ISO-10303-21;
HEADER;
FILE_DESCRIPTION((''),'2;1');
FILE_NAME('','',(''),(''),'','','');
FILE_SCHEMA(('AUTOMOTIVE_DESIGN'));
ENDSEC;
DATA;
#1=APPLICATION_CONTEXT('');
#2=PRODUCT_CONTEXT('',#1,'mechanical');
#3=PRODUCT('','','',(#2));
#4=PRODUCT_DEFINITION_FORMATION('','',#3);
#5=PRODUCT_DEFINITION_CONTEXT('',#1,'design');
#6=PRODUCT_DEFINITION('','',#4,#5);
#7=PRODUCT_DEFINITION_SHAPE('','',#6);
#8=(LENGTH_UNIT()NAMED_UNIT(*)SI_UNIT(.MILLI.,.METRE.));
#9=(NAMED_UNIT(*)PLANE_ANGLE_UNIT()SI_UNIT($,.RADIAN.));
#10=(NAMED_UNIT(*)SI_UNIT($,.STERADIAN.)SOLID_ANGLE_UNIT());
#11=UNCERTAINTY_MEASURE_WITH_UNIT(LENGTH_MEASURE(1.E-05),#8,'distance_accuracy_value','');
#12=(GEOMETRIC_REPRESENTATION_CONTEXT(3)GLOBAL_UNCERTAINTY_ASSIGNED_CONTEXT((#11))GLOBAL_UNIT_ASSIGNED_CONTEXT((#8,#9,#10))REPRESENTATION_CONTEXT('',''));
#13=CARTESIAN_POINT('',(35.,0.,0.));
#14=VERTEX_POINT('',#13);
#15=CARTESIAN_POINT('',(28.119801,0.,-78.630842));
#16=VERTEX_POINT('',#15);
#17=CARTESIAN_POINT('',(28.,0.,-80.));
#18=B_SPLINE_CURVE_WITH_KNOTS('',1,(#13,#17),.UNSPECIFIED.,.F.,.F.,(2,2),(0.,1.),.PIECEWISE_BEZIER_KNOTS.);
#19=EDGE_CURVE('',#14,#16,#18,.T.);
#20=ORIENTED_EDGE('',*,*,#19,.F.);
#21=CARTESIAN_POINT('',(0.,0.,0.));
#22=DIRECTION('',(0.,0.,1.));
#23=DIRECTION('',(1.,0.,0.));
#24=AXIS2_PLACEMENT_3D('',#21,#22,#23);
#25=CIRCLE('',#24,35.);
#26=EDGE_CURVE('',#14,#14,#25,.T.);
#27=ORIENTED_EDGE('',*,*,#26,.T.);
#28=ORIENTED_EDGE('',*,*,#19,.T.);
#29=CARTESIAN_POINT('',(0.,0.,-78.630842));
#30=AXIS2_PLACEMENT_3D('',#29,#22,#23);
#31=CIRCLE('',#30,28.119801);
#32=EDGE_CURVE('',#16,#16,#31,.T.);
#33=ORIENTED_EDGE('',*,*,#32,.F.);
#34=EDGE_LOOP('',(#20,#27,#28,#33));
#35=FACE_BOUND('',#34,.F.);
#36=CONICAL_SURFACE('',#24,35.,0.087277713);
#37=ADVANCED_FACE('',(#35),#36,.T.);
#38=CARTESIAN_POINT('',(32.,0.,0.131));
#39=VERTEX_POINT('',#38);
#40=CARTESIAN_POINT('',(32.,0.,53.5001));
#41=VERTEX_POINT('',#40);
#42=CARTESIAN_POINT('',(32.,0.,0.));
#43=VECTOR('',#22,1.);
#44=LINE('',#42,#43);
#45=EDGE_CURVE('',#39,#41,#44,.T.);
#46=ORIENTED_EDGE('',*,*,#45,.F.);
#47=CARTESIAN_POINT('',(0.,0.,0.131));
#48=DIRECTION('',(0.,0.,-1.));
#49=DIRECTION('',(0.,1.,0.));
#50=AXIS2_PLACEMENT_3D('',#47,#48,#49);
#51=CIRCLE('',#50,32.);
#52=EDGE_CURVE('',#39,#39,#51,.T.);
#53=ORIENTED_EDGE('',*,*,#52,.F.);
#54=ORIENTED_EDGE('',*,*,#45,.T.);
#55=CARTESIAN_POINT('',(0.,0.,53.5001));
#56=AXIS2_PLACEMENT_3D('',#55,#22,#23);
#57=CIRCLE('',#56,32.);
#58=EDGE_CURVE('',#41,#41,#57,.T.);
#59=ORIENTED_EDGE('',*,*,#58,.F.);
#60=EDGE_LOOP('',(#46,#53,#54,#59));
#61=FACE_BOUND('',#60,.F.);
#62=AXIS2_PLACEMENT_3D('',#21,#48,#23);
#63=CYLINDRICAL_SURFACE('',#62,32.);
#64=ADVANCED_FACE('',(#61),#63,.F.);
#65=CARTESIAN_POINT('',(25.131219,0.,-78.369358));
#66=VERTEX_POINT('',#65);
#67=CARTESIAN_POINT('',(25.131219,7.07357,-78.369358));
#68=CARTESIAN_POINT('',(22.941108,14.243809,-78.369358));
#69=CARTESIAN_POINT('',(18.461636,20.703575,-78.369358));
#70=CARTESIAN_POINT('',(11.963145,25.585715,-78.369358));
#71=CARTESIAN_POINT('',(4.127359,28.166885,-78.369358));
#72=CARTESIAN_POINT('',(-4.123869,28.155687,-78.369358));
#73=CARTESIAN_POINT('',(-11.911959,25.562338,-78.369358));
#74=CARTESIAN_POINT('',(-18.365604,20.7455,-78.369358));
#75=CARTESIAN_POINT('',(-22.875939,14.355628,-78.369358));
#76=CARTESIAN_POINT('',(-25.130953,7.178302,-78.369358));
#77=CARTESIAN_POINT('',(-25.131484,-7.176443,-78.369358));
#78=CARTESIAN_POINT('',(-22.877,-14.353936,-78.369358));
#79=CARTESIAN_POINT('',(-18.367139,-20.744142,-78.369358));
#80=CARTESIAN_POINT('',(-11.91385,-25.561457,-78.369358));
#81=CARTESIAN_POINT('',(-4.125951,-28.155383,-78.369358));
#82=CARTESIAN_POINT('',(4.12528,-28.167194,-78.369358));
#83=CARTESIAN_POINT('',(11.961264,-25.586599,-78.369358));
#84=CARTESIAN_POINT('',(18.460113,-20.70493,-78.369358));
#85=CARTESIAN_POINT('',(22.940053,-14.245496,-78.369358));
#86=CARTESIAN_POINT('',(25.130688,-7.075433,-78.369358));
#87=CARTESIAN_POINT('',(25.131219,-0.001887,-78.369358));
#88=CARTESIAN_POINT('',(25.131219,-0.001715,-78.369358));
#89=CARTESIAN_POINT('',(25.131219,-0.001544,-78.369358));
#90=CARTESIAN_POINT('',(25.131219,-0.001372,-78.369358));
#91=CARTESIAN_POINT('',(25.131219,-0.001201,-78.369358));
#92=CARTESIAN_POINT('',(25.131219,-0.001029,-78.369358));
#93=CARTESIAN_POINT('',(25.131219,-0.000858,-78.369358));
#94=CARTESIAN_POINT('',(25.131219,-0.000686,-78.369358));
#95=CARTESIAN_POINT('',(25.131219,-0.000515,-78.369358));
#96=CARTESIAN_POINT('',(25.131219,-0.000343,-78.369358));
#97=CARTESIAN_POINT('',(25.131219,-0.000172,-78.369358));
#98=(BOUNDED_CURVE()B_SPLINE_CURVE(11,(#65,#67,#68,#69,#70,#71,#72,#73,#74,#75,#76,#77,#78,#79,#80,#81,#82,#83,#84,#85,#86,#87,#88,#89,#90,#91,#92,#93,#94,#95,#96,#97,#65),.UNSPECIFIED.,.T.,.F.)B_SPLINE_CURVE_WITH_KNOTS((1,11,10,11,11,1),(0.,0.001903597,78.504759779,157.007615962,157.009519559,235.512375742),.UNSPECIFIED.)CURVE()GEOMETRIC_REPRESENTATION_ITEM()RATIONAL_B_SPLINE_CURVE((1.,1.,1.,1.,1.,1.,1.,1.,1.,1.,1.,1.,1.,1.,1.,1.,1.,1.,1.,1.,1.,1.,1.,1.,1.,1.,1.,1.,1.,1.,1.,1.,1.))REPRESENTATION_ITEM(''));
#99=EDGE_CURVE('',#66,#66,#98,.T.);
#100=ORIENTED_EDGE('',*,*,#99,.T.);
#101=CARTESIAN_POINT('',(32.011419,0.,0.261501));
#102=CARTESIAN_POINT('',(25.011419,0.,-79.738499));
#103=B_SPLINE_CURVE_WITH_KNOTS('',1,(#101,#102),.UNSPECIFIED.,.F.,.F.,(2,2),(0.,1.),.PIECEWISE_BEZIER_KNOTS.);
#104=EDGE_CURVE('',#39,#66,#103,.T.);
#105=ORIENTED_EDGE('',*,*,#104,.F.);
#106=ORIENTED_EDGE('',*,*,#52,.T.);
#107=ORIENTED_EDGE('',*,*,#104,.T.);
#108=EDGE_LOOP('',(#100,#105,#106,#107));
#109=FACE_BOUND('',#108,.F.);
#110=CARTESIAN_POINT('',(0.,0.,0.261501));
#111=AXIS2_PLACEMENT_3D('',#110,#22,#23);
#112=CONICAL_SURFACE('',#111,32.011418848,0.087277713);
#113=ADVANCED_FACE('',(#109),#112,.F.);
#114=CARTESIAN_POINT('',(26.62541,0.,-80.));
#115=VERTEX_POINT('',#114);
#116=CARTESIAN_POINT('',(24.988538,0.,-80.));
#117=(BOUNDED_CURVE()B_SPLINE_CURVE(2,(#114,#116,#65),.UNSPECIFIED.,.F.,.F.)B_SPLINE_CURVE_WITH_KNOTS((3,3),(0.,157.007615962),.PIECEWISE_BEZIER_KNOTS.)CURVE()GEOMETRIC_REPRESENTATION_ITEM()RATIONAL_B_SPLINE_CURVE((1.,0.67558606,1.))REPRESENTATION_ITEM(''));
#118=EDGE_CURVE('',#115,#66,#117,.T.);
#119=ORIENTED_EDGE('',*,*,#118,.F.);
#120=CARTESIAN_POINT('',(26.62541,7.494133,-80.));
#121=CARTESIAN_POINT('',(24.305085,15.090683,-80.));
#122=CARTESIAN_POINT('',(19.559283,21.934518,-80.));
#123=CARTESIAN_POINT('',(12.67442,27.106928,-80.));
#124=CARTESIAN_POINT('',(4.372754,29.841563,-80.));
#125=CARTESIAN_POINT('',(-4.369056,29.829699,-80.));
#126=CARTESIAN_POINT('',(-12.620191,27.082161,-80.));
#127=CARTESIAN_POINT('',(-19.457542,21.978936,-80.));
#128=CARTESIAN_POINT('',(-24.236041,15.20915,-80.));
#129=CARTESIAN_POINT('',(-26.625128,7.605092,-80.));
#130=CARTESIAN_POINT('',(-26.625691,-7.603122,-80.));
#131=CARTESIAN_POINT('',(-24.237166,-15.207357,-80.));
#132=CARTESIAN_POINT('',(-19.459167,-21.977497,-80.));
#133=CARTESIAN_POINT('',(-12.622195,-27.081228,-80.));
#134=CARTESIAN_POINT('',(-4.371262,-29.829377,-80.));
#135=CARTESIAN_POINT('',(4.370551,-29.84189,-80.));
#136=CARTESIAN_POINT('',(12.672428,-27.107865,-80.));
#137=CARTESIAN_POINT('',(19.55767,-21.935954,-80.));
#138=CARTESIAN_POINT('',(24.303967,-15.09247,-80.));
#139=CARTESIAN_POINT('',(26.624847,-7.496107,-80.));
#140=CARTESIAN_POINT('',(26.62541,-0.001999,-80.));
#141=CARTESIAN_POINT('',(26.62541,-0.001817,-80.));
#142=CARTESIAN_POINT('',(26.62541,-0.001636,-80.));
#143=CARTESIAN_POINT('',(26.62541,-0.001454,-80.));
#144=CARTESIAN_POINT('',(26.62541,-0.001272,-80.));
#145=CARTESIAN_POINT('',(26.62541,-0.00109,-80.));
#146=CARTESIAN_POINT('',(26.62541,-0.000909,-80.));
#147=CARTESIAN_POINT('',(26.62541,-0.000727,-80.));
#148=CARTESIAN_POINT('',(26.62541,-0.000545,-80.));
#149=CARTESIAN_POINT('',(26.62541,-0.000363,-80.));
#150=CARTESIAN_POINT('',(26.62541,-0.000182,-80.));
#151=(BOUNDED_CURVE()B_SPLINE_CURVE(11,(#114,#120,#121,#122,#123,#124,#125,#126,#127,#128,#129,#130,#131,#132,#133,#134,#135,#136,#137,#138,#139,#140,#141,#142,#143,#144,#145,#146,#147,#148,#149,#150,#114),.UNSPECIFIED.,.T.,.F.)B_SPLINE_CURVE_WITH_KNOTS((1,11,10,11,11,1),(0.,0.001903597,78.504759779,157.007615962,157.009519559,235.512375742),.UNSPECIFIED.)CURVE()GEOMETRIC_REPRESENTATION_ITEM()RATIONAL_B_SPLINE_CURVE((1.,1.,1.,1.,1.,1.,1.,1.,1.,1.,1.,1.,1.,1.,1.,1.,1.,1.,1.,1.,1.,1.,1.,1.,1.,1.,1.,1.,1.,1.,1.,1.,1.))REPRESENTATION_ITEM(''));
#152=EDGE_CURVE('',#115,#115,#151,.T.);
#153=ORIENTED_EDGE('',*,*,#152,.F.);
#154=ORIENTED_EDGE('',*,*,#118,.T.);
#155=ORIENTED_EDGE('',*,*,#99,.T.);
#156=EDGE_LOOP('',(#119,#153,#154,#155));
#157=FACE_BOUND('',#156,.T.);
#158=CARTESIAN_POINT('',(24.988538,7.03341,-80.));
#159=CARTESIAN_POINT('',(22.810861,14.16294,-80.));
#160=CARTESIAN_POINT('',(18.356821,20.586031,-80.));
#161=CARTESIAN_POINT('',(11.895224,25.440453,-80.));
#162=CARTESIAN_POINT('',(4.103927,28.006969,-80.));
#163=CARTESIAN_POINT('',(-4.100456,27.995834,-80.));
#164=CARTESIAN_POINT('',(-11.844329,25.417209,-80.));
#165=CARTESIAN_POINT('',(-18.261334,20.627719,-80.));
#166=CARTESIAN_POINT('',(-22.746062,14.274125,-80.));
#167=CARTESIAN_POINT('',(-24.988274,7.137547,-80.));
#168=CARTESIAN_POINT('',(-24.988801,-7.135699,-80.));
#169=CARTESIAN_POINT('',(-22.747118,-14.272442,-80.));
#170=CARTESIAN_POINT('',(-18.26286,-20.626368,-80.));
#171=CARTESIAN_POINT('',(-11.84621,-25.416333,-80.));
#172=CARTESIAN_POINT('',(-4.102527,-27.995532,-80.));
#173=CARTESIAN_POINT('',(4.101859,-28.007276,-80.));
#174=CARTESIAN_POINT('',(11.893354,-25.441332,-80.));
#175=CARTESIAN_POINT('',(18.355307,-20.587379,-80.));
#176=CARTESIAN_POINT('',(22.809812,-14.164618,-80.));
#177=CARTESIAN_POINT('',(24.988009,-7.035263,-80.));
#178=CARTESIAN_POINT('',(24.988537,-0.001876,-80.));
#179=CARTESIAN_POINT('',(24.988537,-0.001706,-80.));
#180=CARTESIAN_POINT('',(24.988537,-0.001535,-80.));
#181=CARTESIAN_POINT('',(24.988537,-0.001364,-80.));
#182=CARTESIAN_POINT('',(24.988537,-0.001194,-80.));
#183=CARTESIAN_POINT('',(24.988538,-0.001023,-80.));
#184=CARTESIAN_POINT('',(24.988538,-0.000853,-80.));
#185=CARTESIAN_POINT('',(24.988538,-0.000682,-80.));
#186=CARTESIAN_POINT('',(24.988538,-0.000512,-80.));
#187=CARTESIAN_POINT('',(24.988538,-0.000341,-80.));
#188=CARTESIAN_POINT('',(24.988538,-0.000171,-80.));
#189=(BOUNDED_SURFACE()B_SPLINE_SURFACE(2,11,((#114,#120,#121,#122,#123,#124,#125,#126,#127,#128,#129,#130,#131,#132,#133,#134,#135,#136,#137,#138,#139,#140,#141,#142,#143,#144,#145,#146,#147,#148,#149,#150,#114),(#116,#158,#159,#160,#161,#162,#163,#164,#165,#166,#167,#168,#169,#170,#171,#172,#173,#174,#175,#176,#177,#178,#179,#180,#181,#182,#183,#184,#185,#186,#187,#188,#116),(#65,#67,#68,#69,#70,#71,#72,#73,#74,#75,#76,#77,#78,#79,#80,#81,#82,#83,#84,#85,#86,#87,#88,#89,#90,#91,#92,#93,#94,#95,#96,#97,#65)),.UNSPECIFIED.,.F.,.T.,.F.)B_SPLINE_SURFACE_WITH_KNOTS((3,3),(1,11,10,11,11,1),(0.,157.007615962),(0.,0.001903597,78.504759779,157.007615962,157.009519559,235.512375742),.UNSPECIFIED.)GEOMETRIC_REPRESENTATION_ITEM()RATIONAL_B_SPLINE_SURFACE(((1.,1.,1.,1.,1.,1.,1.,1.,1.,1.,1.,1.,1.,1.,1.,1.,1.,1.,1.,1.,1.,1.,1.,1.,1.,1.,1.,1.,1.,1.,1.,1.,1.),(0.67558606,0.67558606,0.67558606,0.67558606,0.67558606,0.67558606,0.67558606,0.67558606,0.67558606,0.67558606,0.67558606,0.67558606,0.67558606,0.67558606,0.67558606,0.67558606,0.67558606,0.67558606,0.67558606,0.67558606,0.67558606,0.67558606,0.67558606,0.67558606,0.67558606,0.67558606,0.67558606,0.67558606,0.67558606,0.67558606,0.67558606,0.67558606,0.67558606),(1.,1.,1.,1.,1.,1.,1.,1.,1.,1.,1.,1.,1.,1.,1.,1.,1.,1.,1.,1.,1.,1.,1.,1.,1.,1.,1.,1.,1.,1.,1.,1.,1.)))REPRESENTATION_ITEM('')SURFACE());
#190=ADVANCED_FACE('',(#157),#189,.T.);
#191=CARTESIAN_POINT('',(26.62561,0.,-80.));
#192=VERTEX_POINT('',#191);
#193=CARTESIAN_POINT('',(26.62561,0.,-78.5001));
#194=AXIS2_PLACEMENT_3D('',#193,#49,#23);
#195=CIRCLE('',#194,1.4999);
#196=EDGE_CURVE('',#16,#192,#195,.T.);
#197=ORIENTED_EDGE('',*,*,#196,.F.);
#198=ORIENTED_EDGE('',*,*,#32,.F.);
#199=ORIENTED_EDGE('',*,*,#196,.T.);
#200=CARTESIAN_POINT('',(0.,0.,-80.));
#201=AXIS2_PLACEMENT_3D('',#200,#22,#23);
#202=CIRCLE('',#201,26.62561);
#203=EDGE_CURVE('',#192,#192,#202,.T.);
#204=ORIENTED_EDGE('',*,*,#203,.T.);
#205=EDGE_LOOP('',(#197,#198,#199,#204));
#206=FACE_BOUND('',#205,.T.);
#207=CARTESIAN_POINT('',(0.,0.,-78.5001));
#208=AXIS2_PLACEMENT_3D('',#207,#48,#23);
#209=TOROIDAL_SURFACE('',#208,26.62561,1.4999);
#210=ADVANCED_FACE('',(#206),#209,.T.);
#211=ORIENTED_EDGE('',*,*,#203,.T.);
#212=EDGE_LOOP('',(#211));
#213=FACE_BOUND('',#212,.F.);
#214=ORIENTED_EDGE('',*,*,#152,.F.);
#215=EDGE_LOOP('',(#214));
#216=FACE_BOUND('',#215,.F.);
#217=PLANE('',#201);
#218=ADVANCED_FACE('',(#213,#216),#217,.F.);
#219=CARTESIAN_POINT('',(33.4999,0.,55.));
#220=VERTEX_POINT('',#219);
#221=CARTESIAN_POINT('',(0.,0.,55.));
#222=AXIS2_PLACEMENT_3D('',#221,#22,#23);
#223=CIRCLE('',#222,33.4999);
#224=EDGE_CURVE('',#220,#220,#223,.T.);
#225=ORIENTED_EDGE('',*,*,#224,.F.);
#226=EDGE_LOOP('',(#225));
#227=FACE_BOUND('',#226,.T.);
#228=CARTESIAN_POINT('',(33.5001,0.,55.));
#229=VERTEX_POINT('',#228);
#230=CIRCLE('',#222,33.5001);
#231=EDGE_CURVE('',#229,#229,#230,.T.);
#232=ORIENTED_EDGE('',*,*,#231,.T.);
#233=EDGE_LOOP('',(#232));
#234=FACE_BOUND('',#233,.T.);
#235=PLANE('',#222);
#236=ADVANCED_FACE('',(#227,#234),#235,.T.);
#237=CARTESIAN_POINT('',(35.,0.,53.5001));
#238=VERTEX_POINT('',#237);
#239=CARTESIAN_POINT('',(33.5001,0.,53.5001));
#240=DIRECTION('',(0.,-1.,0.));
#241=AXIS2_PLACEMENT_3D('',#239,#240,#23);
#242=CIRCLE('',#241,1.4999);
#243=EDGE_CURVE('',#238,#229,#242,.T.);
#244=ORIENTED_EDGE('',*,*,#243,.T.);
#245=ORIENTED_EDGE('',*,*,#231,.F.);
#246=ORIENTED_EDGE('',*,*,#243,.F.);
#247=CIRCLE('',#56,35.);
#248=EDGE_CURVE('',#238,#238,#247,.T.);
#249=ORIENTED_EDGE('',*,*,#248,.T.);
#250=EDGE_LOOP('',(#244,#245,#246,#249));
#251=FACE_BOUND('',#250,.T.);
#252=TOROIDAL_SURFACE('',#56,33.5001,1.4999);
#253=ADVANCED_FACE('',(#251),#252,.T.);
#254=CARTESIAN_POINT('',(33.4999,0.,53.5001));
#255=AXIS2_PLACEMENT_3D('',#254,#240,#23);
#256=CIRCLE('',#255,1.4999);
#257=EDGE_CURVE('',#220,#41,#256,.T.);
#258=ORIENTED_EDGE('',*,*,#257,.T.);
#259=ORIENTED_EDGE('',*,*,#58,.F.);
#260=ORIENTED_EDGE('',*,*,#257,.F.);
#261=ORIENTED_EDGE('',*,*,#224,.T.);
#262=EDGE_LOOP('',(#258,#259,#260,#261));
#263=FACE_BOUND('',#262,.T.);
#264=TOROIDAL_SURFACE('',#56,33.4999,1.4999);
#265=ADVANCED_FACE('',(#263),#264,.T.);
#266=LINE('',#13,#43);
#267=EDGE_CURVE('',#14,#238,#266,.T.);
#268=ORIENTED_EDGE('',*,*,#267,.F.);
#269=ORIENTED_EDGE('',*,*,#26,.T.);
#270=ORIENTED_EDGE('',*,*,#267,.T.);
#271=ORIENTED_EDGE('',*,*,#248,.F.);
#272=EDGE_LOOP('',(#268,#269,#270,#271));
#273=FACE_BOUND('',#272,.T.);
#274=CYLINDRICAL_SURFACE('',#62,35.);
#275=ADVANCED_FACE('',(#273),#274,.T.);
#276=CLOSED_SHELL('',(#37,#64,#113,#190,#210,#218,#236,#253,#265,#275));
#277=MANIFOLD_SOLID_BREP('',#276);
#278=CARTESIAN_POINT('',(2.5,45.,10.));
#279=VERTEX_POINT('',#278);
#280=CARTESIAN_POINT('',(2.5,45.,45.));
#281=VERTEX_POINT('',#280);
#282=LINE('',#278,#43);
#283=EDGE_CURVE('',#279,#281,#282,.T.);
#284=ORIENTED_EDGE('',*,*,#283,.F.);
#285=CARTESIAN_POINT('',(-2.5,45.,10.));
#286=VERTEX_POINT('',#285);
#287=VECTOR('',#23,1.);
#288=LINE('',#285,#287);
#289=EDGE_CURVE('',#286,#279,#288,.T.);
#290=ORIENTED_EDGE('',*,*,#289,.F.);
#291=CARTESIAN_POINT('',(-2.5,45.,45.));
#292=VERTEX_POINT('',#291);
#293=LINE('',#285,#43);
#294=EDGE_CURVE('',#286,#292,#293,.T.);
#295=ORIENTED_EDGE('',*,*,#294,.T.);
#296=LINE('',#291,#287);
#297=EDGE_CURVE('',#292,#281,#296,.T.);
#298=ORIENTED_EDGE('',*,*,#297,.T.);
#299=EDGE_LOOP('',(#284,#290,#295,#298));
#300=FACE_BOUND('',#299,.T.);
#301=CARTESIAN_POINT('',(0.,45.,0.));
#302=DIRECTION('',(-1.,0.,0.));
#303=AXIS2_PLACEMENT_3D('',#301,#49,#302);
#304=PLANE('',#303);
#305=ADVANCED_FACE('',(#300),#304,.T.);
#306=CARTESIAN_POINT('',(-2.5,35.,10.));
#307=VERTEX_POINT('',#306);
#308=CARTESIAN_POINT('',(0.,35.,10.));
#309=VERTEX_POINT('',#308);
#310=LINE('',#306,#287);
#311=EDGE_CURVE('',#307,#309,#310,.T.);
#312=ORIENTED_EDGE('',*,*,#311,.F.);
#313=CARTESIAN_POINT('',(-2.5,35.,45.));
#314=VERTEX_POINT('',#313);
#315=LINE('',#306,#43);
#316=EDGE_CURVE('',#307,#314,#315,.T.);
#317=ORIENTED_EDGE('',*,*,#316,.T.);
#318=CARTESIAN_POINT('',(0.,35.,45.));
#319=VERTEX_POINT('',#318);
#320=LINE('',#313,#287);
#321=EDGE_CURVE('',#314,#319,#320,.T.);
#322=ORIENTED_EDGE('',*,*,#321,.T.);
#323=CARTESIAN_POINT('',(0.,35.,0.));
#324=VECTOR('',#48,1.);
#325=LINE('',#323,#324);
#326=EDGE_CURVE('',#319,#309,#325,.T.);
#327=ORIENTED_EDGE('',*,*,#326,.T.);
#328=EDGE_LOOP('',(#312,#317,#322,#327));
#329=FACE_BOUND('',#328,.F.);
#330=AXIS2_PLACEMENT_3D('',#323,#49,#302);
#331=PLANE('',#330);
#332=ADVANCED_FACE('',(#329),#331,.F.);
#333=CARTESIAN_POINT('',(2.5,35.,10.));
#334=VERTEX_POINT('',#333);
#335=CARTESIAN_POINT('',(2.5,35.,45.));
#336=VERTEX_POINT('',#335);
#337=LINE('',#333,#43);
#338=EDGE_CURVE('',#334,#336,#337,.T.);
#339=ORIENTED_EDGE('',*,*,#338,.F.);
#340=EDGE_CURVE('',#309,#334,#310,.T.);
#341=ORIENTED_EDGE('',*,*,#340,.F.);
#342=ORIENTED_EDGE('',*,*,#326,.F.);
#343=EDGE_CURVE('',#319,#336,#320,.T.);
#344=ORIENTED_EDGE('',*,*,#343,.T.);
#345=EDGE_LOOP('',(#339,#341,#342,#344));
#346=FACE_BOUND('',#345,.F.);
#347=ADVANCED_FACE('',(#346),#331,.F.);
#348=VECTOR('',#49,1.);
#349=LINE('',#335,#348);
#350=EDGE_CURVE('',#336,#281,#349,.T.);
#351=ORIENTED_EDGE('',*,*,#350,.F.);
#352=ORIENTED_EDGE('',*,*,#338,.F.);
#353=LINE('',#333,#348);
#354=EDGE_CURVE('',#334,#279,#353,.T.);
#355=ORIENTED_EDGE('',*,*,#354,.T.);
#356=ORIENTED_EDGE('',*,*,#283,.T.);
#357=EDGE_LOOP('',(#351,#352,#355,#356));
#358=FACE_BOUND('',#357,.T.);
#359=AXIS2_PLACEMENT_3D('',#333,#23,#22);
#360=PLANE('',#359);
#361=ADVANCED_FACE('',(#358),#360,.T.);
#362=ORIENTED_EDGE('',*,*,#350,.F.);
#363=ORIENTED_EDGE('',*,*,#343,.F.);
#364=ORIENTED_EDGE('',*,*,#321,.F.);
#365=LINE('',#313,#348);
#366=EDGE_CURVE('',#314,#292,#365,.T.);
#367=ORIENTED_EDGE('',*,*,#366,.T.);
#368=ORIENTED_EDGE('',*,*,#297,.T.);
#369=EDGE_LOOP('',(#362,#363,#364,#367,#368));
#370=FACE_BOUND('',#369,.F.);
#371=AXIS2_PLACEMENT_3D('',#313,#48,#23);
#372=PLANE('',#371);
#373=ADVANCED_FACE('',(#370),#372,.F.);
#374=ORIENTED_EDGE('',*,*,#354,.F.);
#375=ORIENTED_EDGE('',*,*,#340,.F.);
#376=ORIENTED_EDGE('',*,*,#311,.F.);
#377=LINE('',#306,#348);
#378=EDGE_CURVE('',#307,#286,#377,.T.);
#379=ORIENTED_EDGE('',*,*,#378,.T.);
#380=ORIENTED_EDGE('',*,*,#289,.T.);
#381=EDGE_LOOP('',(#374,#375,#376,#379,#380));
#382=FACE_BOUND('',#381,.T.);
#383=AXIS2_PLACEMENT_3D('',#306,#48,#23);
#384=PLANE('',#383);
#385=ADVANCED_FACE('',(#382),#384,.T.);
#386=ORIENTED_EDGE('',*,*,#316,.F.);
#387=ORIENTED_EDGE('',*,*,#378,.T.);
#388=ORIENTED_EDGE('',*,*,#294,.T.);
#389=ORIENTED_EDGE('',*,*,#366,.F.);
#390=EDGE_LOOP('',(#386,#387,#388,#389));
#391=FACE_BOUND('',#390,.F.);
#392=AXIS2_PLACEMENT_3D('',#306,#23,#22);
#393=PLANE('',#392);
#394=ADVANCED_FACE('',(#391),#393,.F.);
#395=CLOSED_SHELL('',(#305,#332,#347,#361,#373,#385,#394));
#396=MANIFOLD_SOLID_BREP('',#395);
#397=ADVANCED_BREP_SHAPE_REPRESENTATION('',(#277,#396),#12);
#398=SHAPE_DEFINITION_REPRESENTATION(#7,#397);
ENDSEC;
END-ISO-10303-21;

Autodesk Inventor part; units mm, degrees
ref_plane "YZ Plane" through (0, 0, 0) normal (1, 0, 0) x (0, 1, 0)
sketch "Sketch1" plane through (0, 0, 0) normal (0, 0, 1) x (1, 0, 0)
  circle A0 centre (0, 0) radius 35
  dimension "d0" = 70
extrude "Extrusion1" add sketch "Sketch1" along normal blind 55
ref_plane "Work Plane1" through (0, 0, -80) normal (0, 0, 1) x (1, 0, 0)
sketch "Sketch2" plane through (0, 0, -80) normal (0, 0, 1) x (1, 0, 0)
  circle A0 centre (0, 0) radius 28
  dimension "d4" = 56
loft "Loft1" add profiles "Sketch2" section 1 edges at (-35, 0, 0)
shell "Shell1" thickness 3 removed faces 2 at (1.125, 3.113, -80) at (-1.9985, 11.019, 55)
ref_plane "Work Plane3" through (0, 35, 0) normal (0, 1, 0) x (-1, 0, 0)
sketch "Sketch3" plane through (0, 35, 0) normal (0, 1, 0) x (-1, 0, 0)
  line L0 (35, 55) -> (-35, 55) projected
  line L1 (2.5, 10) -> (2.5, 45)
  line L2 (2.5, 45) -> (-2.5, 45)
  line L3 (2.5, 10) -> (-2.5, 10)
  line L4 (-2.5, 10) -> (-2.5, 45)
  point P0 (0, 0)
  dimension "d15" = 5
  dimension "d18" = 5
extrude "Extrusion2" add sketch "Sketch3" along normal blind 10
fillet "Fillet1" radius 1.5 4 edges at (-35, 0, 55) (-32, 0, 55) (-28, 0, -80) (-24.9885, 0.0019, -80)
properties part number "EDF Cone"
